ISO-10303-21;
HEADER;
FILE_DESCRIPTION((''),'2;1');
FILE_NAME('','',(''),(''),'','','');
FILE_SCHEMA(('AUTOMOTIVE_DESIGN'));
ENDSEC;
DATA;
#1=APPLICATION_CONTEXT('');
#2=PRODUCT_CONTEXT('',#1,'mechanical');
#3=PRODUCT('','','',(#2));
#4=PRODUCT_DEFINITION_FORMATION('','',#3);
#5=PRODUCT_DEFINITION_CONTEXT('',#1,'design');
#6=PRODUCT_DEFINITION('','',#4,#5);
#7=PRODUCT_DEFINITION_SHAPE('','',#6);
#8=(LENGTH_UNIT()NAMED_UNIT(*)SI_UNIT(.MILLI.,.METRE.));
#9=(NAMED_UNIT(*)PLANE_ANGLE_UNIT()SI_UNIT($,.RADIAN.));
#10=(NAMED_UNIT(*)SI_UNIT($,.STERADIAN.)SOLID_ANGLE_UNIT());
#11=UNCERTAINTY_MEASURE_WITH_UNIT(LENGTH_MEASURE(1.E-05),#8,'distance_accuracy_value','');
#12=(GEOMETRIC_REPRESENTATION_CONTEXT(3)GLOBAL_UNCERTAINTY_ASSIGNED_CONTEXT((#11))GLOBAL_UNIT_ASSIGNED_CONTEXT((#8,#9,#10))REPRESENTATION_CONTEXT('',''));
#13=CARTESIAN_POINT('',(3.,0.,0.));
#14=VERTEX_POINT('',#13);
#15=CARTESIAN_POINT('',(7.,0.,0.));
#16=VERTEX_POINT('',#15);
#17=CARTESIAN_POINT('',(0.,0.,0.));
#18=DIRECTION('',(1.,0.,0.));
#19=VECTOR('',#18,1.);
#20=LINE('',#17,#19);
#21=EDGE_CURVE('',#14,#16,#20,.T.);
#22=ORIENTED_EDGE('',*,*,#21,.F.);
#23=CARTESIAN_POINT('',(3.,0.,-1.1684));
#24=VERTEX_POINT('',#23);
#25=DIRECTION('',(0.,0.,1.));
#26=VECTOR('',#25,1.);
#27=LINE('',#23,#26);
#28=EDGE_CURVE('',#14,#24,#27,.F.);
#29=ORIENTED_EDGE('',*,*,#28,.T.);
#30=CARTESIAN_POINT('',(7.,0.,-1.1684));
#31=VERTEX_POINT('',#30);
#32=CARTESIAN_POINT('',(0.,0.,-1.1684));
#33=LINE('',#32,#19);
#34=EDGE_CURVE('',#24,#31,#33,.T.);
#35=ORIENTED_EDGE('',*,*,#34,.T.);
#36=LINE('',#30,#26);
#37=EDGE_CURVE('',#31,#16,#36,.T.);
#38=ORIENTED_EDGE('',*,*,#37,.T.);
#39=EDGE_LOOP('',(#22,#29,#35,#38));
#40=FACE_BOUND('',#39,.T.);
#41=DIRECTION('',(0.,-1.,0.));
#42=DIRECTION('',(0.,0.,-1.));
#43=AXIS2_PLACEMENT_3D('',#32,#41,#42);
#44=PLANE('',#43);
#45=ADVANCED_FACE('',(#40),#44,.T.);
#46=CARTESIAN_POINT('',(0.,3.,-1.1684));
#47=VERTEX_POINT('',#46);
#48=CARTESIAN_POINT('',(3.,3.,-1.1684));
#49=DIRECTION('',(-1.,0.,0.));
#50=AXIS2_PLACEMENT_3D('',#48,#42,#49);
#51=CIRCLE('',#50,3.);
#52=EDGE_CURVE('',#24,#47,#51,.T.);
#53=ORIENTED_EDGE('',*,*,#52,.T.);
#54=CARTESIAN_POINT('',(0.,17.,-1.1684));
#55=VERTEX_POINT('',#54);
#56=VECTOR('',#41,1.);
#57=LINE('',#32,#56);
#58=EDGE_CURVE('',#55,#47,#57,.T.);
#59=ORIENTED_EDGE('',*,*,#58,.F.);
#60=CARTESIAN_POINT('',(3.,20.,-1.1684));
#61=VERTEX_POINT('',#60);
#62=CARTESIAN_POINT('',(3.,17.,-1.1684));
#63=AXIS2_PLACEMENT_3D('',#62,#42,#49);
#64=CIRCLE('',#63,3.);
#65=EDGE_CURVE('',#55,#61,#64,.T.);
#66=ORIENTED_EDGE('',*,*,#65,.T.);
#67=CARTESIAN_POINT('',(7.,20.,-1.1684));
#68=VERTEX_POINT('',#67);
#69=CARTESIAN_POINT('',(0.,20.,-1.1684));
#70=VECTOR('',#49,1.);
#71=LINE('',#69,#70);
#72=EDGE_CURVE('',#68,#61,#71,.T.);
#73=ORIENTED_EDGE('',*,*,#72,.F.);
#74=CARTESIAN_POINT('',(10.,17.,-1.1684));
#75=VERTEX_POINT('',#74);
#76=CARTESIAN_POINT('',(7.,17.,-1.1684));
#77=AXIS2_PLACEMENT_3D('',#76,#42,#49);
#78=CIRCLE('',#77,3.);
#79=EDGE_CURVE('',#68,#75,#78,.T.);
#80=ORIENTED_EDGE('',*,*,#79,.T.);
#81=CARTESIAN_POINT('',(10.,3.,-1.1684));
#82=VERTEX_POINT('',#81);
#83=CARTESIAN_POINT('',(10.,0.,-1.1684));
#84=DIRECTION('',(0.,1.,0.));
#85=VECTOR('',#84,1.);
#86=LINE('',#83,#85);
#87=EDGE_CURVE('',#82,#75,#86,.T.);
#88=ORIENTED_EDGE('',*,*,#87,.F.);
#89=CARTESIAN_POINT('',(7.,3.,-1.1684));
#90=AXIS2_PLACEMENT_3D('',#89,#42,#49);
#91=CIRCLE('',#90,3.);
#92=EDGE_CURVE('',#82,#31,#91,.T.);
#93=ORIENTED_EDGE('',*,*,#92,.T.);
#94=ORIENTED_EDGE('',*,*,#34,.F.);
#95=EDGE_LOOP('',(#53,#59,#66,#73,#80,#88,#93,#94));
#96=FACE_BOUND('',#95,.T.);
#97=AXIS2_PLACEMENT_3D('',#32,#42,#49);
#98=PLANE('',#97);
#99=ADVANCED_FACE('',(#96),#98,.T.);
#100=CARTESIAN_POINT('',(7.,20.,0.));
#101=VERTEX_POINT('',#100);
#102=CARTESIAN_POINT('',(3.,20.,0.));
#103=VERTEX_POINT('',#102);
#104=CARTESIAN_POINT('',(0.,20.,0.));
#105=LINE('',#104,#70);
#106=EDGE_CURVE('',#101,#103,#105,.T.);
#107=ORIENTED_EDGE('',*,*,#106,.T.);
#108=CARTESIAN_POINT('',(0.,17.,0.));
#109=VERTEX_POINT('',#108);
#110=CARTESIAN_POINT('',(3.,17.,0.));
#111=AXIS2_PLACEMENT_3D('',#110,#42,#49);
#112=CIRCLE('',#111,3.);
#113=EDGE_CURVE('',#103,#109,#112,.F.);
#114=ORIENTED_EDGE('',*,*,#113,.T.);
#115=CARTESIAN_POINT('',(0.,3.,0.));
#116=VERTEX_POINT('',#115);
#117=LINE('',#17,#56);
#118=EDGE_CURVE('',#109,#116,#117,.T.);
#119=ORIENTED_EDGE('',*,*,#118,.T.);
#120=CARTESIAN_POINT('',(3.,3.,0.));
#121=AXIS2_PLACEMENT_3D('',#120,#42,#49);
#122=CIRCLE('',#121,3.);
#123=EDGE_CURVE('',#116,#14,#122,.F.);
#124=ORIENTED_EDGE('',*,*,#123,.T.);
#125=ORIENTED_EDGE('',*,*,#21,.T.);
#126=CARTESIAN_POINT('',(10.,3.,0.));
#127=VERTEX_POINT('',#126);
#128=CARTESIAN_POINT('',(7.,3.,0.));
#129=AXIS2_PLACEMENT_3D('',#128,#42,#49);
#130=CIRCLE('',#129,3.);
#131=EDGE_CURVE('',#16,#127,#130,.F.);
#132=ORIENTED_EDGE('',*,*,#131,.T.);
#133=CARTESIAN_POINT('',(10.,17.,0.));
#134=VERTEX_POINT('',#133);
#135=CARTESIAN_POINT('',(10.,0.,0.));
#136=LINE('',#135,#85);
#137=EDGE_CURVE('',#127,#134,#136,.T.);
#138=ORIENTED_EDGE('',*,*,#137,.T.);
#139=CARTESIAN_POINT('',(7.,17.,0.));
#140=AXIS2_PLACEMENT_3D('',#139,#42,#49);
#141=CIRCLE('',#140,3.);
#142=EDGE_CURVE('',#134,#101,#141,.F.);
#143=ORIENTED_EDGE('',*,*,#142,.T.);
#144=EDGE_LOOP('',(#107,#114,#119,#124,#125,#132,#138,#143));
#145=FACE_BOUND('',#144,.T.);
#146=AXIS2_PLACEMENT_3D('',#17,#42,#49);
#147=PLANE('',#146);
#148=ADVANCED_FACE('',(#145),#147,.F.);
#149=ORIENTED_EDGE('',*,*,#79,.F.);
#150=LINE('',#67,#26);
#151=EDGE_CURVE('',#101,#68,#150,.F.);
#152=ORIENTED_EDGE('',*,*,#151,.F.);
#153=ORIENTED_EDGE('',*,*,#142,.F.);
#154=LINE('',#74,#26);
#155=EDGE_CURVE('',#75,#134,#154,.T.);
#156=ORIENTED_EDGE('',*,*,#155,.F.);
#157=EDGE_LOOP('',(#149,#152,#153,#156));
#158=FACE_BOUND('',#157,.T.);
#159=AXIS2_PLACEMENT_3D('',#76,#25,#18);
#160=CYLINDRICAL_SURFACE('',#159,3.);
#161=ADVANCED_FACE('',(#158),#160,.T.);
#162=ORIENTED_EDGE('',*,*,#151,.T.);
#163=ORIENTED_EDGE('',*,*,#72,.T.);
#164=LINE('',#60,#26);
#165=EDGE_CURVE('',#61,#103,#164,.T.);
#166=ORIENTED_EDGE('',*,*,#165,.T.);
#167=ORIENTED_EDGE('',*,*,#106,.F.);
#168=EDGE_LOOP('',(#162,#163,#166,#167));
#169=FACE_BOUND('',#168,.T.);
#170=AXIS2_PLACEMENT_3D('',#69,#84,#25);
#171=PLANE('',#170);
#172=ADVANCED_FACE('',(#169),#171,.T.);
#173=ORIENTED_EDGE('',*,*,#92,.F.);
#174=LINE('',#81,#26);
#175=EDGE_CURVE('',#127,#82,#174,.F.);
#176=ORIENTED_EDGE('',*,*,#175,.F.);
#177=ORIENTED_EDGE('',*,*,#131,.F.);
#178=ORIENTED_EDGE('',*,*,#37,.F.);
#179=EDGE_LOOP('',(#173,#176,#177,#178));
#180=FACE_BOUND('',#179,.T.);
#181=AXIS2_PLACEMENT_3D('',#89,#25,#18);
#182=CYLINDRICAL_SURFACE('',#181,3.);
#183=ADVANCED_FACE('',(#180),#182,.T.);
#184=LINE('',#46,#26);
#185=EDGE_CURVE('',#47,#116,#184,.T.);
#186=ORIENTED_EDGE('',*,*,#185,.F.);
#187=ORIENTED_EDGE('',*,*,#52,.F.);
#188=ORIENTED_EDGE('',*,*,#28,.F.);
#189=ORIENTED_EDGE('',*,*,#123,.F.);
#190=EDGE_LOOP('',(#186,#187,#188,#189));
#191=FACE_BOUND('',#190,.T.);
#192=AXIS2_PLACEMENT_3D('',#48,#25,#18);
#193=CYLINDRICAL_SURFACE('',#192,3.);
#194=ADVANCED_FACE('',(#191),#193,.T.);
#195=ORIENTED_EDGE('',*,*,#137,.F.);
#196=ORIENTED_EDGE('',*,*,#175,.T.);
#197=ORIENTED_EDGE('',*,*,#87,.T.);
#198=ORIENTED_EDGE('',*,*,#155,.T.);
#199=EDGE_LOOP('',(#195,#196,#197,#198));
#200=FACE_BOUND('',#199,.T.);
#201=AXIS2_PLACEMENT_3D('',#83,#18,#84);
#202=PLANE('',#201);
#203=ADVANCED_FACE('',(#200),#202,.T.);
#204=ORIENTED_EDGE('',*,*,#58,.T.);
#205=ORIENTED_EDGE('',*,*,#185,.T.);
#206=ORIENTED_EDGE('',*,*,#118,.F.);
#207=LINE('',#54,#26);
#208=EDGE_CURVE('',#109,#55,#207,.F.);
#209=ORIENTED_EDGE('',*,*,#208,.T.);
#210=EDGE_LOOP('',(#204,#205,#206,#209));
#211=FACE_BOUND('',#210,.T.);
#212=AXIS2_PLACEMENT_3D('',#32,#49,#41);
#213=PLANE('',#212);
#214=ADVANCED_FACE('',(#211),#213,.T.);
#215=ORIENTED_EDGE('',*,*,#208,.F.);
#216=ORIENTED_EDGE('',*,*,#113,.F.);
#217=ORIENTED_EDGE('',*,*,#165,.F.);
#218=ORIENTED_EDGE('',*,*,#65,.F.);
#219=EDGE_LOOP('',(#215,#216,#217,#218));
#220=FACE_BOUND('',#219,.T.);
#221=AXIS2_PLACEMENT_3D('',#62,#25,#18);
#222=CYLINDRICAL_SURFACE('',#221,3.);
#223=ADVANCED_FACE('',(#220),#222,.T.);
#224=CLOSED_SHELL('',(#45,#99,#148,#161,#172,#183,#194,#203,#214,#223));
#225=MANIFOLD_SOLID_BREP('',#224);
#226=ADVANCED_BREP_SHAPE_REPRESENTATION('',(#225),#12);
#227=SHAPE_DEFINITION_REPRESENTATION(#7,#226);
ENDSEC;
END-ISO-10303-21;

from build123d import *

# Parameters (mm, degrees)
SKETCH1_W          = 10
SKETCH1_H          = 20
BASE_FLANGE1_DEPTH = 1.1684
FILLET1_R          = 3


# Sheet-metal steps are written as plain solids
with BuildPart() as part:
    # Sketch1 → Base-Flange1 (new body)
    with BuildSketch(Plane.XY):
        with Locations((5, 10)):
            Rectangle(SKETCH1_W, SKETCH1_H)
    extrude(amount=-BASE_FLANGE1_DEPTH)

    # Fillet1
    fillet1_edges = [part.edges().sort_by_distance(p)[0] for p in [
        (0, 20, -0.5842),
        (10, 20, -0.5842),
        (10, 0, -0.5842),
        (0, 0, -0.5842),
    ]]
    fillet(fillet1_edges, radius=FILLET1_R)


solid = part.part
